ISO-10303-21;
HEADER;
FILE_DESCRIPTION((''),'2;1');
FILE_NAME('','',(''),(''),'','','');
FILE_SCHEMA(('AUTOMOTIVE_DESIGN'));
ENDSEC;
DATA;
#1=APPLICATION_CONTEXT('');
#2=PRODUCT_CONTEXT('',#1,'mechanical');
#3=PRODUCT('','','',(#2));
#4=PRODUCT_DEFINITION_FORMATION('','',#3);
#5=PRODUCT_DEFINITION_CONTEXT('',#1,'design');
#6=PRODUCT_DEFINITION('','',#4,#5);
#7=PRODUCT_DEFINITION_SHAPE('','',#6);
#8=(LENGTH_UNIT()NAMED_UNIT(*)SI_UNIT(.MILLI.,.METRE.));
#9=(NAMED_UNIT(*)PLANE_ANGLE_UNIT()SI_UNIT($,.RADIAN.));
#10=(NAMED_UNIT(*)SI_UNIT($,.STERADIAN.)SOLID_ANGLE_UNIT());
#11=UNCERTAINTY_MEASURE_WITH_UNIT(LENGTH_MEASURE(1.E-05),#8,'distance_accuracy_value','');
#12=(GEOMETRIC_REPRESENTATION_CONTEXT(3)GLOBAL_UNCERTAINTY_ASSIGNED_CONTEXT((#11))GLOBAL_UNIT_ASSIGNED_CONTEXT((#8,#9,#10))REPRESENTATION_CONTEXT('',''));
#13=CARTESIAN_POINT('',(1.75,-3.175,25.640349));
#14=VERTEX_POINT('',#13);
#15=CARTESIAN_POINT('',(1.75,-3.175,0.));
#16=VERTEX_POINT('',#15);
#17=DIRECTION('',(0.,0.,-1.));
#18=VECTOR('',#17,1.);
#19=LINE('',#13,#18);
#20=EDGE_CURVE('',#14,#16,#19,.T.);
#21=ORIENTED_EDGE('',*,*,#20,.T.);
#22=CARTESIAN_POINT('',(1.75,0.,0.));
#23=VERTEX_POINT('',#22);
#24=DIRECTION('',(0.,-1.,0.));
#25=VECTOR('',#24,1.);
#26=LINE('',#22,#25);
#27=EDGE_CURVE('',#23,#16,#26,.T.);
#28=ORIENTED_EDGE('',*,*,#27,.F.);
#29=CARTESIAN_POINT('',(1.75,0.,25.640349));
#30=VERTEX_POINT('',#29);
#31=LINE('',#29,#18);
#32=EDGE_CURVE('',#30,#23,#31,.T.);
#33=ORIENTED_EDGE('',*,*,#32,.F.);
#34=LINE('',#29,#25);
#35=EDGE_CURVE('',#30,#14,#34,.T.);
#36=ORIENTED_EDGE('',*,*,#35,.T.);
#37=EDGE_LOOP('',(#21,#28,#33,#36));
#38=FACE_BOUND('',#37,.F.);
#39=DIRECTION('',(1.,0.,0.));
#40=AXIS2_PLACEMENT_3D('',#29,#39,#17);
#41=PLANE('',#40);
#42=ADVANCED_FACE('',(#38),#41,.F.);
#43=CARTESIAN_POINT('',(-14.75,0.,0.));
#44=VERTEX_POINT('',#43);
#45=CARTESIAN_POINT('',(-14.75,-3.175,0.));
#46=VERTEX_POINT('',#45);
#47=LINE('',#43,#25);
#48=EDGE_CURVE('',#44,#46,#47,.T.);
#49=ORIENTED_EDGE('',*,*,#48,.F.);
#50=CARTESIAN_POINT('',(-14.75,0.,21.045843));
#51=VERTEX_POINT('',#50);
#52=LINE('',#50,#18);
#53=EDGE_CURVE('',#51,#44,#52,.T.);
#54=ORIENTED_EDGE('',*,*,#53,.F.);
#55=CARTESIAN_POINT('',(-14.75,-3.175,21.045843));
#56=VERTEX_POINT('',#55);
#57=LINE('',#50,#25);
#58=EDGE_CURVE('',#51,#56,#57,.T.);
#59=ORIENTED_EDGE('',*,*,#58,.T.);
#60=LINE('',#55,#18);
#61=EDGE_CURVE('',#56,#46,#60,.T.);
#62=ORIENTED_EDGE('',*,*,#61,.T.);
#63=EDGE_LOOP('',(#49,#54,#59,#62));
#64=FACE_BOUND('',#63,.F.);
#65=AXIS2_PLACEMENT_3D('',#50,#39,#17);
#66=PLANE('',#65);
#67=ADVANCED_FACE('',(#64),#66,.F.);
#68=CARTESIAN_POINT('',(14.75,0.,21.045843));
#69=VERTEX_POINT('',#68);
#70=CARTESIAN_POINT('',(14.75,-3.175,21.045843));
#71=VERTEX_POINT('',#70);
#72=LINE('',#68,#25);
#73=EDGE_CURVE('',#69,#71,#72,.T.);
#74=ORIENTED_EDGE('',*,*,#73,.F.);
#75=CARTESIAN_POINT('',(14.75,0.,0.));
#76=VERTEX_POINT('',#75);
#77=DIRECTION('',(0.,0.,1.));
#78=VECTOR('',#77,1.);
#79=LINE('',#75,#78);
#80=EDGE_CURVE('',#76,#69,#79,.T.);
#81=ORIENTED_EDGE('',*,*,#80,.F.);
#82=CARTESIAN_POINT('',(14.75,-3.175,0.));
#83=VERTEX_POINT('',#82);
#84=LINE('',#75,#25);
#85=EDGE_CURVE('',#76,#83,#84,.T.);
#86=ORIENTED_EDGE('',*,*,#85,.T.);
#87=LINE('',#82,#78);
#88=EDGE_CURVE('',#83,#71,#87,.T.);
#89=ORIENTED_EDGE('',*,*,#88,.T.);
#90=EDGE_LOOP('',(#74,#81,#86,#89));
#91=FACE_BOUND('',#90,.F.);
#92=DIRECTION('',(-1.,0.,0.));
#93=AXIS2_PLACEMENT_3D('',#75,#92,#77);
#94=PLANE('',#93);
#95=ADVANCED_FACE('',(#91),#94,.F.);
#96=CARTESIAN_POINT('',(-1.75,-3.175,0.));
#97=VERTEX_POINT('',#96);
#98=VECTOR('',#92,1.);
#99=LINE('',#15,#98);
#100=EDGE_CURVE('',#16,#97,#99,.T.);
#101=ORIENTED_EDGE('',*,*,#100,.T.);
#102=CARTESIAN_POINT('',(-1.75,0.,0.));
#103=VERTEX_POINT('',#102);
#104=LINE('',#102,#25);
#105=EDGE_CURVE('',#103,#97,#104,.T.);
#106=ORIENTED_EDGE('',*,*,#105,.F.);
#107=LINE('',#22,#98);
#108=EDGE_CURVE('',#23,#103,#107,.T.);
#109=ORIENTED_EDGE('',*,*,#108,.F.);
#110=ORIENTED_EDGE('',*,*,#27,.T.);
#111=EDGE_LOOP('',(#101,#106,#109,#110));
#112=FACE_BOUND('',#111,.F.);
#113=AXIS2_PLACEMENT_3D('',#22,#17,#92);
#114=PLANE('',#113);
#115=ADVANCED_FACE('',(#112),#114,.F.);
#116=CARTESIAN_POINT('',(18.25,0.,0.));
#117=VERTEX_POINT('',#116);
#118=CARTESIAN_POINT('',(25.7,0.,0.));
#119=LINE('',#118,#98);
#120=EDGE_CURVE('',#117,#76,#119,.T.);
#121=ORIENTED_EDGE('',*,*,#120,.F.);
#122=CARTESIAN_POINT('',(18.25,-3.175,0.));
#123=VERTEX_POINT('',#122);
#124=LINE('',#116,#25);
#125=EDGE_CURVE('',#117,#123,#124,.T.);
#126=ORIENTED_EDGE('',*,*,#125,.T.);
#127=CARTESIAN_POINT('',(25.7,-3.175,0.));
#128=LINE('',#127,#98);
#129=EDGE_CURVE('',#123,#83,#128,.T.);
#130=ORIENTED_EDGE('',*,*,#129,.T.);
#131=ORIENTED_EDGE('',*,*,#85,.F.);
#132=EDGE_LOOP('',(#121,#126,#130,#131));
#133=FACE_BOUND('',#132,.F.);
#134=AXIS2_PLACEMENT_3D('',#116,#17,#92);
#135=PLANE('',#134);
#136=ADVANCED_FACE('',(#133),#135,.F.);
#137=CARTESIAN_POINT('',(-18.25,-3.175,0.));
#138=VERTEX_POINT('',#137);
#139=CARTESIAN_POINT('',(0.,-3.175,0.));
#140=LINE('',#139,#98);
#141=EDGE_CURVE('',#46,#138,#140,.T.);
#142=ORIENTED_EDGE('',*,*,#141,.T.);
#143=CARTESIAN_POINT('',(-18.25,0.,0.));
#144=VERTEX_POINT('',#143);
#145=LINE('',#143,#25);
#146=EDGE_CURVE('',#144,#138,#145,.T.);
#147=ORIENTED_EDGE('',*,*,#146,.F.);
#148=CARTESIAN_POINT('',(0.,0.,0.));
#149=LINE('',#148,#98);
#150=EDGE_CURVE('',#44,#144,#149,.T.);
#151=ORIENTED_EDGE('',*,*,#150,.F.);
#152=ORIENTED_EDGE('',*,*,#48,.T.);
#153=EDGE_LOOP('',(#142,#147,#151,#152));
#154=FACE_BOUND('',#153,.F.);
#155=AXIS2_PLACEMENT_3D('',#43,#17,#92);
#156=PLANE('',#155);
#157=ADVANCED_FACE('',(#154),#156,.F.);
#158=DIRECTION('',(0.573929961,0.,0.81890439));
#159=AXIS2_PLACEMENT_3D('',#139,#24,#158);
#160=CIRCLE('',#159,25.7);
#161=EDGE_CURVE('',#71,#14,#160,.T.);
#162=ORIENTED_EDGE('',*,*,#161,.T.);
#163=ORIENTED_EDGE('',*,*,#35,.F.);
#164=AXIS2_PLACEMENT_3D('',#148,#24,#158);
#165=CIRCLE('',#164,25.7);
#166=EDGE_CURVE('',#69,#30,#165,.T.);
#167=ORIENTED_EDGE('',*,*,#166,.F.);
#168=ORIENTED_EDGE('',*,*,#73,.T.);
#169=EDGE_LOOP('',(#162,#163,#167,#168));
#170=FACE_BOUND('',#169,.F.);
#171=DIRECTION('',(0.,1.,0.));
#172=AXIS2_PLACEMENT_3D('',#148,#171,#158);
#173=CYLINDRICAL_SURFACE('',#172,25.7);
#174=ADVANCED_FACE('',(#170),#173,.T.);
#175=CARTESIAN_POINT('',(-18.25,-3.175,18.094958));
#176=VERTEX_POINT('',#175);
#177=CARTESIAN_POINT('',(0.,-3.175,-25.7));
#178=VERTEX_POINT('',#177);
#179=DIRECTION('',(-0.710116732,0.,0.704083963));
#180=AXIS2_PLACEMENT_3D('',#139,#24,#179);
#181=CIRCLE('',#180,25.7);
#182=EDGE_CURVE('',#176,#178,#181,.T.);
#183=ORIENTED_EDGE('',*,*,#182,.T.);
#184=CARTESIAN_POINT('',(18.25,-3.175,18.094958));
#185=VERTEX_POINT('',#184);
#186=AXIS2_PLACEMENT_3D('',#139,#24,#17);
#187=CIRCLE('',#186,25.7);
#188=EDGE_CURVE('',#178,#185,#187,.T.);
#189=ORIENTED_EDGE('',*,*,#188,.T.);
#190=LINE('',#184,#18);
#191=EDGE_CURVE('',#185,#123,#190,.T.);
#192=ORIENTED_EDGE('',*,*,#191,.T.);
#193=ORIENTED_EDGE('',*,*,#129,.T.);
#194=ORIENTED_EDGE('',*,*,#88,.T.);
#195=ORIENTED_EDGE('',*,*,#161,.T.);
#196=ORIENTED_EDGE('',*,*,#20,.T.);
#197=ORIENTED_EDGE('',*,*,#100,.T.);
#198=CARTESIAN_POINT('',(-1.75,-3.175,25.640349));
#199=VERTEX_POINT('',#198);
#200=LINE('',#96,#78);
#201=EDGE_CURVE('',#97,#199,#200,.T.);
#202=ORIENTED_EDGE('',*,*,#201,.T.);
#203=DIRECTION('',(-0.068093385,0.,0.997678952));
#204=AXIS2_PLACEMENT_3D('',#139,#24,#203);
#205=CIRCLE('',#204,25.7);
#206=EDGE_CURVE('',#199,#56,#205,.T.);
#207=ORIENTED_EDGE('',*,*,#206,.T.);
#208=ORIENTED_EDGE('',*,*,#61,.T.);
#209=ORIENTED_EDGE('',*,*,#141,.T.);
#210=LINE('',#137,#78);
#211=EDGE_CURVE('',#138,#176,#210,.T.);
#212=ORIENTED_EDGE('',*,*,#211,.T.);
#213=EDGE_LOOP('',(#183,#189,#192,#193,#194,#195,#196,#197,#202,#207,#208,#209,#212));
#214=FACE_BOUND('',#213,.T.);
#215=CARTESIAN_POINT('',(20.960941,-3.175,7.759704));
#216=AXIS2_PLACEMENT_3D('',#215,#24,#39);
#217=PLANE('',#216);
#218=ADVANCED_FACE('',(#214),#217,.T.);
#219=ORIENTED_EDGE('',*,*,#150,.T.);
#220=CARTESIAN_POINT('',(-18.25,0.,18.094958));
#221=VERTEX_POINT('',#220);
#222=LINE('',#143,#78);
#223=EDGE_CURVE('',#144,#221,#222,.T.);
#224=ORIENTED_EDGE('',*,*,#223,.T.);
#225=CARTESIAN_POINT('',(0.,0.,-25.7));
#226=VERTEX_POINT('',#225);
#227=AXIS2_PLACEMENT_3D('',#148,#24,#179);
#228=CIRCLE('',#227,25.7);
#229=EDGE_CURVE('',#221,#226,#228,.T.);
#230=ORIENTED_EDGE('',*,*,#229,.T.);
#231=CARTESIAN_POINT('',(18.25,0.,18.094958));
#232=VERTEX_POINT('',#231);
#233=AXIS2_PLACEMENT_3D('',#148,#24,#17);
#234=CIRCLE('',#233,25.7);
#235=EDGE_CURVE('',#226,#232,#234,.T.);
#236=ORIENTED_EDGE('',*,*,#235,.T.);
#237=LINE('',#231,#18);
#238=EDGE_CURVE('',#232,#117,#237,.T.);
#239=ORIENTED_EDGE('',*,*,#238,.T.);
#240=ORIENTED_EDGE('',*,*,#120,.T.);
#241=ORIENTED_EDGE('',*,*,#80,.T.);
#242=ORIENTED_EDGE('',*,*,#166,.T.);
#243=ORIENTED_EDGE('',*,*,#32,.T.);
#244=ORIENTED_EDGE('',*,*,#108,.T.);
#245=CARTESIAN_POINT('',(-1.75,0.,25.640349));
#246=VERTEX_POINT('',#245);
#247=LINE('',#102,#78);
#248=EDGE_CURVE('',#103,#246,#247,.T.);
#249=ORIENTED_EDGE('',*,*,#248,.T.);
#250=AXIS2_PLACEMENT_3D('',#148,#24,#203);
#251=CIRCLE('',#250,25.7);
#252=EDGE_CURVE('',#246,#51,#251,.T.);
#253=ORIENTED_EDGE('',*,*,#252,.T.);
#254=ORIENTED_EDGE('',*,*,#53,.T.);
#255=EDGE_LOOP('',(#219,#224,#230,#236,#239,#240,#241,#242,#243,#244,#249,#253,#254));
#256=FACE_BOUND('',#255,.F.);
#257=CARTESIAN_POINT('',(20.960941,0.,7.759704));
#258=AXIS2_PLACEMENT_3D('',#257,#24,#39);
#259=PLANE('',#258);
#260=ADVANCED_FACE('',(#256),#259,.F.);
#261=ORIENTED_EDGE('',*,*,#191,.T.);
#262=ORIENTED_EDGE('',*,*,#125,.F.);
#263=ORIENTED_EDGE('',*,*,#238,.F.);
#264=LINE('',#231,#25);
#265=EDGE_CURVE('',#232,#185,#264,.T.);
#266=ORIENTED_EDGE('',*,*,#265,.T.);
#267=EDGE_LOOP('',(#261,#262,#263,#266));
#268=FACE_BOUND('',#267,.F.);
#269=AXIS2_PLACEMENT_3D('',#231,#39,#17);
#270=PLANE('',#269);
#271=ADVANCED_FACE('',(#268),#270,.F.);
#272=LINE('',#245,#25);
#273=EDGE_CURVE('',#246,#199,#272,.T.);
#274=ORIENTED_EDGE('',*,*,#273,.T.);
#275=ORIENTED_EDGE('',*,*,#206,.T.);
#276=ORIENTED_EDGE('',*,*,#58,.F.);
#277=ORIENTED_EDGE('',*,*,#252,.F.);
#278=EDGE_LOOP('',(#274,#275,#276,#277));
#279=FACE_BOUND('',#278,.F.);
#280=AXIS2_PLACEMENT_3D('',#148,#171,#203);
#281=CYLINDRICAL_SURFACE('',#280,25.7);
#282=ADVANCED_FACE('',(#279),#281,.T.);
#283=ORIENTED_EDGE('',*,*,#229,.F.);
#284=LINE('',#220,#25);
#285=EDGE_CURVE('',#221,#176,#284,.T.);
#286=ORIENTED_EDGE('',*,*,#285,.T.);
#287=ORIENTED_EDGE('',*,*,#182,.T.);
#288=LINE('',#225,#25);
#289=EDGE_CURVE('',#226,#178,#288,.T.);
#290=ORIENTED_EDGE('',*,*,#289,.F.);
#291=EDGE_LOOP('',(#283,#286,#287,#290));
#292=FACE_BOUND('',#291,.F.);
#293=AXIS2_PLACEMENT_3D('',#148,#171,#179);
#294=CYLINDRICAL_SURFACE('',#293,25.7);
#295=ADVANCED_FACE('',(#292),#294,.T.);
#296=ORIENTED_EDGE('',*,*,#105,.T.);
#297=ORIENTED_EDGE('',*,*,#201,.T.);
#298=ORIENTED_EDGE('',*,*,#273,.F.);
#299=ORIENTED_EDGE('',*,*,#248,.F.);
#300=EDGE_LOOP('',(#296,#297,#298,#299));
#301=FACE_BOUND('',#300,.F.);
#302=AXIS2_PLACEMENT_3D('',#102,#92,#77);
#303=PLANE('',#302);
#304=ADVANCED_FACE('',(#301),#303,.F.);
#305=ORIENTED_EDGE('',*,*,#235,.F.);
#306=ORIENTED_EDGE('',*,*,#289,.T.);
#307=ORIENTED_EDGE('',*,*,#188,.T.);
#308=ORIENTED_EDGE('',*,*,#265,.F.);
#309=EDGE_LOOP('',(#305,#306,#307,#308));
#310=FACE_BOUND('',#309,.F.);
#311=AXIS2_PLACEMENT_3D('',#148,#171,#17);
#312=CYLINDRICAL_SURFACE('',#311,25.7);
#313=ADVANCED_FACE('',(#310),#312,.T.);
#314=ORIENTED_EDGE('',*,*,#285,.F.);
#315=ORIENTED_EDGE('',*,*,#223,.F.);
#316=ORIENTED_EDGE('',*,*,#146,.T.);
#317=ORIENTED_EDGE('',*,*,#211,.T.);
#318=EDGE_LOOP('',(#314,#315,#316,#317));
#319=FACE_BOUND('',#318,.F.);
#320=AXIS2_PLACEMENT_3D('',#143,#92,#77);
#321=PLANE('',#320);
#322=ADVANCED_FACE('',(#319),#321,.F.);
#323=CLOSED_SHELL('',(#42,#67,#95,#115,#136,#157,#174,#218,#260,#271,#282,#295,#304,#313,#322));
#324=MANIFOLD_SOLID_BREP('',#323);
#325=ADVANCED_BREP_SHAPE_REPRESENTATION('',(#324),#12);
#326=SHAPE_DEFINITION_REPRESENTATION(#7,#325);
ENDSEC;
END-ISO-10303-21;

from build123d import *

# Parameters (mm, degrees)
F1_DEPTH = 3.175


# Not quite as in the source:
# - a length typed as a fraction of an inch, garbled in the dataset ("3 / 203.2 mm" for 3/8 in), is restored


with BuildPart() as f1:
    # F0 (on Front) → F1 (new body)
    with BuildSketch(Plane.XZ):
        with BuildLine():
            Line((18.25, 0), (25.7, 0))
            ThreePointArc((25.7, 0), (23.7646270747, 9.7842986463), (18.25, 18.0949578612))
            Line((18.25, 18.0949578612), (18.25, 0))
        make_face()
        with BuildLine():
            ThreePointArc((-18.25, 18.0949578612), (-23.7646270747, 9.7842986463), (-25.7, 0))
            Line((-25.7, 0), (-18.25, 0))
            Line((-18.25, 0), (-18.25, 18.0949578612))
        make_face()
        with BuildLine():
            Line((14.75, 0), (14.75, 21.0458428199))
            ThreePointArc((14.75, 21.0458428199), (8.5638701474, 24.231180906), (1.75, 25.6403490616))
            Line((1.75, 25.6403490616), (1.75, 12.8201745308))
            Line((1.75, 12.8201745308), (1.75, 0))
            Line((1.75, 0), (14.75, 0))
        make_face()
        with BuildLine():
            Line((-14.75, 0), (-1.75, 0))
            Line((-1.75, 0), (-1.75, 12.8201745308))
            Line((-1.75, 12.8201745308), (-1.75, 25.6403490616))
            ThreePointArc((-1.75, 25.6403490616), (-8.5638701474, 24.231180906), (-14.75, 21.0458428199))
            Line((-14.75, 21.0458428199), (-14.75, 0))
        make_face()
        with BuildLine():
            ThreePointArc((-25.7, 0), (-18.1726442765, -18.1726442765), (0, -25.7))
            Line((0, -25.7), (0, 0))
            Line((0, 0), (-1.75, 0))
            Line((-1.75, 0), (-14.75, 0))
            Line((-14.75, 0), (-18.25, 0))
            Line((-18.25, 0), (-25.7, 0))
        make_face()
        with BuildLine():
            ThreePointArc((0, -25.7), (18.1726442765, -18.1726442765), (25.7, 0))
            Line((25.7, 0), (18.25, 0))
            Line((18.25, 0), (14.75, 0))
            Line((14.75, 0), (1.75, 0))
            Line((1.75, 0), (0, 0))
            Line((0, 0), (0, -25.7))
        make_face()
    extrude(amount=F1_DEPTH)


solid = f1.part
